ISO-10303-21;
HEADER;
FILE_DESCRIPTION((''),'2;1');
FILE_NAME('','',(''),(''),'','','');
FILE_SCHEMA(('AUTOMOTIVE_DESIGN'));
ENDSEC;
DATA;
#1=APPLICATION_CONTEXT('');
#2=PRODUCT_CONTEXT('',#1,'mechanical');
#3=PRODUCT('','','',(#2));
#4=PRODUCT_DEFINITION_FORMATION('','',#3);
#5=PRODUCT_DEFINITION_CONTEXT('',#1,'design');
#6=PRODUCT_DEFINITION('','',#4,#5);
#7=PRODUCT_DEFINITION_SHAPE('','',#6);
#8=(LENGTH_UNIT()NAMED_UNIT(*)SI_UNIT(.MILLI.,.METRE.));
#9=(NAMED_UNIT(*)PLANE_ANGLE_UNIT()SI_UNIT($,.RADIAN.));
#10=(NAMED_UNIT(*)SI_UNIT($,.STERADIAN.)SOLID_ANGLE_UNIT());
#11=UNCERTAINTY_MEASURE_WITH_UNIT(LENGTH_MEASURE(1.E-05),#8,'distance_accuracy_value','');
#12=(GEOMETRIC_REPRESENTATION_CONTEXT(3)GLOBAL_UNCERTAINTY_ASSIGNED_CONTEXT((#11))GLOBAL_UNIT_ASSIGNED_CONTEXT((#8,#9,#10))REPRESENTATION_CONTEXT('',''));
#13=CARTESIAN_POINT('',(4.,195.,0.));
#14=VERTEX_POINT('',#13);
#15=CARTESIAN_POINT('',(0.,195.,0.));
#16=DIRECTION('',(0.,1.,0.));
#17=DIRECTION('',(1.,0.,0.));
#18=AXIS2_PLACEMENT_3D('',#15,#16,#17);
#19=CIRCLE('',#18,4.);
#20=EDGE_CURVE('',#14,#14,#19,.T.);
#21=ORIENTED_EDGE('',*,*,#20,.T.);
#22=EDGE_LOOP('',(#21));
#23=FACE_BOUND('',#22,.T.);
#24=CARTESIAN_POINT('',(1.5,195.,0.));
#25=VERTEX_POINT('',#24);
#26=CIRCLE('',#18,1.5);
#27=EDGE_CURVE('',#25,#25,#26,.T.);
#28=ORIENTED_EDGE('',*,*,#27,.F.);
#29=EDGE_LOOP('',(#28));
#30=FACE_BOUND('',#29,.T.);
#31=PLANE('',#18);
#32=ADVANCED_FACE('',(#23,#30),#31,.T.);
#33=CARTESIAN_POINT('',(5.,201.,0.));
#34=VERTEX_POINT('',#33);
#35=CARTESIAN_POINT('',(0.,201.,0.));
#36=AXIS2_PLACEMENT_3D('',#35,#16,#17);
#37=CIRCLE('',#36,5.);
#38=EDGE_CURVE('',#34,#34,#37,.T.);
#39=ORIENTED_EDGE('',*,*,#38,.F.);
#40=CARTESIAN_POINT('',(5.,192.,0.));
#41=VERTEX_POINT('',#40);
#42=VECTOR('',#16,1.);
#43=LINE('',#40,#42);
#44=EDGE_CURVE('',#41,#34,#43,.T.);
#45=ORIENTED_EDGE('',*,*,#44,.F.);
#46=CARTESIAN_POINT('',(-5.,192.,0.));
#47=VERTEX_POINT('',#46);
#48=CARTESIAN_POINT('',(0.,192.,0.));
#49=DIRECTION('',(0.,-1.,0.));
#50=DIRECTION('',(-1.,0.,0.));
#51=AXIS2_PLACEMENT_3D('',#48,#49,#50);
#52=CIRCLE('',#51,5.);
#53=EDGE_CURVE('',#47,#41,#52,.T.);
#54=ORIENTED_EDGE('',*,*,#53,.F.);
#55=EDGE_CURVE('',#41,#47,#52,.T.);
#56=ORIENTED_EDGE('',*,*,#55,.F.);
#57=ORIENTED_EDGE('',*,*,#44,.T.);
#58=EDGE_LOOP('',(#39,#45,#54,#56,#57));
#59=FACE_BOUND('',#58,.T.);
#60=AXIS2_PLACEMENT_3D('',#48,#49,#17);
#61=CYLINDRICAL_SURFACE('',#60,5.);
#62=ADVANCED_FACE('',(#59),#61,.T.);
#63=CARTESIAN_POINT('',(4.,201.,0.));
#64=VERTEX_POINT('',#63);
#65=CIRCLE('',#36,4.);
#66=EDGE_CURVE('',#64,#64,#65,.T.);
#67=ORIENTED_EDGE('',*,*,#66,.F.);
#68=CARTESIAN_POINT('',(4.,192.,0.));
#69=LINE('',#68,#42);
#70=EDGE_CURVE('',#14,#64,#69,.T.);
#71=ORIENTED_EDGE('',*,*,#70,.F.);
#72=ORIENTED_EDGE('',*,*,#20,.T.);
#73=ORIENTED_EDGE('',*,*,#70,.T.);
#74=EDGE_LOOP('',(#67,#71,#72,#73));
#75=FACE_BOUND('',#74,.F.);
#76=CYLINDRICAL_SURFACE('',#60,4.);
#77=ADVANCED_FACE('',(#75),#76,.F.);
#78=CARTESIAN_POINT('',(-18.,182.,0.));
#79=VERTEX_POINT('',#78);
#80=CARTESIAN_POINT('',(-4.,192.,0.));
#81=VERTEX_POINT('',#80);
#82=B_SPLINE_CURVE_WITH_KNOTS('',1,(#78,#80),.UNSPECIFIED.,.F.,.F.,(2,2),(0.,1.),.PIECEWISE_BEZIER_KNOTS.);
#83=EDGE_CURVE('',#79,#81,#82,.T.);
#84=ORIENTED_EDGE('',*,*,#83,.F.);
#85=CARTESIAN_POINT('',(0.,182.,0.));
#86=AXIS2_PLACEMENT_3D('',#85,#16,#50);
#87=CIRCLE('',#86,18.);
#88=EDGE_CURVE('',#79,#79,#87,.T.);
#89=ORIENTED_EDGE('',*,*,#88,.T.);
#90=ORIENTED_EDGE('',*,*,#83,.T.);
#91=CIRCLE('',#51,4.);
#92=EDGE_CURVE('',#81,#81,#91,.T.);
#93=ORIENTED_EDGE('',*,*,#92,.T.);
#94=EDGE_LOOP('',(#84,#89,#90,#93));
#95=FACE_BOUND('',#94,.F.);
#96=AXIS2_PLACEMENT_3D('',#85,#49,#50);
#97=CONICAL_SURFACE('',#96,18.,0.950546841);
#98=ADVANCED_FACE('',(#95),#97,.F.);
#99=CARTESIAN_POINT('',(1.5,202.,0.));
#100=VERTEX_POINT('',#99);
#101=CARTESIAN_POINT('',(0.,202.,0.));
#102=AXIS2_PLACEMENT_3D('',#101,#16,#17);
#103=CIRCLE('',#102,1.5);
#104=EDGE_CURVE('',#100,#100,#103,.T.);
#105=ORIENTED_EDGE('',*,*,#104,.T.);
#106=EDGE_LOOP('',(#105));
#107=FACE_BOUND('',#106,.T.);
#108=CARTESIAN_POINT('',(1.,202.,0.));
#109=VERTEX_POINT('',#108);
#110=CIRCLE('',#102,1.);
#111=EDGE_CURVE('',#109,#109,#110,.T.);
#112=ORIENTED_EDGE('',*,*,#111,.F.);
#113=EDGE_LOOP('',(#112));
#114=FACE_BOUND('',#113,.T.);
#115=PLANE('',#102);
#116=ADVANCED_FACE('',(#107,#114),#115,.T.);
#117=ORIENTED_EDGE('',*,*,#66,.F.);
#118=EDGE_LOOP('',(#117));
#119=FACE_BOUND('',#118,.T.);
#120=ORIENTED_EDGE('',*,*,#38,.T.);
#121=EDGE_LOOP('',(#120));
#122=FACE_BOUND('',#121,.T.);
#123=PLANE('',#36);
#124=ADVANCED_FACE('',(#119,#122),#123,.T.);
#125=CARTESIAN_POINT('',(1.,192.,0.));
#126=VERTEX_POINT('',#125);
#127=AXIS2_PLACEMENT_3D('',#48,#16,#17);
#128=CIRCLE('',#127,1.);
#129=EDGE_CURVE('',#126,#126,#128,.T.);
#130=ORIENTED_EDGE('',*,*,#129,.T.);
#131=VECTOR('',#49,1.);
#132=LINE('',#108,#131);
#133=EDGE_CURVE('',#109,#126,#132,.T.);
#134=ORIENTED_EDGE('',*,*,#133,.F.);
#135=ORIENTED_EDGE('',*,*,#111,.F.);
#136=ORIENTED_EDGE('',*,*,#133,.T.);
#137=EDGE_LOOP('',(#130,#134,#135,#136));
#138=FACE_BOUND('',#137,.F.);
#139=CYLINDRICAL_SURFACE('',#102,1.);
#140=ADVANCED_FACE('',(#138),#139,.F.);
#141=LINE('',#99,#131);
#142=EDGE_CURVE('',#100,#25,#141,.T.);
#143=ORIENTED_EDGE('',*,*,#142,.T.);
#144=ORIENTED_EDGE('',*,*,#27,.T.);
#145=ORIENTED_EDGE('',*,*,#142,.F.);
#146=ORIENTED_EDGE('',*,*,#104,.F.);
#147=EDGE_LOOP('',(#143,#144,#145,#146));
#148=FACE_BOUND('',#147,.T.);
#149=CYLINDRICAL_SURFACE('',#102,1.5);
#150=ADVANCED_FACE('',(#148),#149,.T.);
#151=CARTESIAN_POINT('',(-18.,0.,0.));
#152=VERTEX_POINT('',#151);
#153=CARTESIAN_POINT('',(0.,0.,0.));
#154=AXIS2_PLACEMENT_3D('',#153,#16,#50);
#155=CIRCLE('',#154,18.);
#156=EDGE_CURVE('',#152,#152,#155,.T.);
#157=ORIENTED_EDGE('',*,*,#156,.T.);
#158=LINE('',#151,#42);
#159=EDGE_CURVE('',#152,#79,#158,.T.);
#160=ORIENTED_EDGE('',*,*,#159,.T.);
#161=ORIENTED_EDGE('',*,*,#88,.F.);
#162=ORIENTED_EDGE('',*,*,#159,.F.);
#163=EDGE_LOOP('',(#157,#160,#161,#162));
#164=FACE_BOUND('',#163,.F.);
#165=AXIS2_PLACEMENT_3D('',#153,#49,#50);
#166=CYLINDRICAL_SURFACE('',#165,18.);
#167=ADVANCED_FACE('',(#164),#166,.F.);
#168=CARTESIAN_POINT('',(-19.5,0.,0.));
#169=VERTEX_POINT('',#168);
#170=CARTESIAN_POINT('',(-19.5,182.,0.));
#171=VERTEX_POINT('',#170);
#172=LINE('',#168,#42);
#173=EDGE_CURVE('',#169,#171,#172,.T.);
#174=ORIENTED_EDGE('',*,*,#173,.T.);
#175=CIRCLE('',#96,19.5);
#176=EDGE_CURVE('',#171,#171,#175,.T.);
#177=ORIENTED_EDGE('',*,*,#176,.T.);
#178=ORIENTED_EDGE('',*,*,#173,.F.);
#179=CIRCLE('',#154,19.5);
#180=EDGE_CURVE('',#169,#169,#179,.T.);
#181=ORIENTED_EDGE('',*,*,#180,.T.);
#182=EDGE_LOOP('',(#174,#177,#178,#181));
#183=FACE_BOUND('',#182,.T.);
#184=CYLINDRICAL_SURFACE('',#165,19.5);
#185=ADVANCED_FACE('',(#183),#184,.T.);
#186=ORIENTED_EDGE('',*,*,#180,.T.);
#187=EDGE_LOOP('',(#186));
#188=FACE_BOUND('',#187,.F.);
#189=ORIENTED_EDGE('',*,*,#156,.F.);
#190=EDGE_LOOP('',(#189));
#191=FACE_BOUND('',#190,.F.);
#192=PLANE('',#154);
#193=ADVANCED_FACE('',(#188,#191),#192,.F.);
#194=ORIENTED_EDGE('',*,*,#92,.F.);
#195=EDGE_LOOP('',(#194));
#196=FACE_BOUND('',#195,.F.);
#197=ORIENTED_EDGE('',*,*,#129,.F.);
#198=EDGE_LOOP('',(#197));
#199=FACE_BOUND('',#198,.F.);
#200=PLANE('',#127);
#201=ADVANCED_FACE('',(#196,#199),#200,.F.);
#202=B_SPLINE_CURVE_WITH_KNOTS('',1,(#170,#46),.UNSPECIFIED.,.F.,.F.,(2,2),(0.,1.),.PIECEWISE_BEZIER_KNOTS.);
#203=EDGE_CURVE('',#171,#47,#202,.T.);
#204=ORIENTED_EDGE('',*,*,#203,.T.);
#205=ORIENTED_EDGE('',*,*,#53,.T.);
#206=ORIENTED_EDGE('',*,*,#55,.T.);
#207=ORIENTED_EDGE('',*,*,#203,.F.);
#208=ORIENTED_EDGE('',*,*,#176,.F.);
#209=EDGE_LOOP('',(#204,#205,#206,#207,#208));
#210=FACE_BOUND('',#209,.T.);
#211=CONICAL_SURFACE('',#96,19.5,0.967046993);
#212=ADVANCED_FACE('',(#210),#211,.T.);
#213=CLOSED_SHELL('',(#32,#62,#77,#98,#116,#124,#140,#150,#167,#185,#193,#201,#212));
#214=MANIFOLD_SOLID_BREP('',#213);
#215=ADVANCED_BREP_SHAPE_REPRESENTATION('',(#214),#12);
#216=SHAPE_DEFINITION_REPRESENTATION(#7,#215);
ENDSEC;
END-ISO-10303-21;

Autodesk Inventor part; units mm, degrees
ref_plane "YZ Plane" through (0, 0, 0) normal (1, 0, 0) x (0, 1, 0)
ref_plane "XZ Plane" through (0, 0, 0) normal (0, 1, 0) x (-1, 0, 0)
sketch "Sketch1" plane through (0, 0, 0) normal (0, 1, 0) x (-1, 0, 0)
  circle A0 centre (0, 0) radius 19.5
  circle A1 centre (0, 0) radius 18
  dimension "d0" = 39
  dimension "d1" = 36
extrude "Extrusion1" add sketch "Sketch1" along normal blind 182
ref_plane "Work Plane1" through (0, 192, 0) normal (0, 1, 0) x (1, 0, 0)
sketch "Sketch2" plane through (0, 192, 0) normal (0, 1, 0) x (1, 0, 0)
  circle A0 centre (0, 0) radius 5
  dimension "d5" = 10
loft "Loft1" add profiles "Sketch2" section 1 edges at (19.5, 182, 0)
sketch "Sketch3" plane through (0, 192, 0) normal (0, 1, 0) x (1, 0, 0)
  circle A0 centre (0, 0) radius 4
  dimension "d11" = 8
loft "Loft2" cut profiles "Sketch3" section 1 edges at (18, 182, 0)
sketch "Sketch4" plane through (0, 192, 0) normal (0, 1, 0) x (1, 0, 0)
  circle A0 centre (0, 0) radius 5
  circle A1 centre (0, 0) radius 4
  circle A2 centre (0, 0) radius 5 projected
  dimension "d16" = 10
  dimension "d17" = 8
extrude "Extrusion2" add sketch "Sketch4" along normal blind 9
sketch "Sketch5" plane through (0, 192, 0) normal (0, 1, 0) x (1, 0, 0)
  circle A0 centre (0, 0) radius 4
  circle A1 centre (0, 0) radius 4 projected
ref_plane "Work Plane2" through (0, 202, 0) normal (0, 1, 0) x (1, 0, 0)
sketch "Sketch6" plane through (0, 202, 0) normal (0, 1, 0) x (1, 0, 0)
  circle A0 centre (0, 0) radius 1.5
  line L0 (1.5, 0) -> (-1.5, 0) construction
  dimension "d21" = 3
extrude "Extrusion3" add sketch "Sketch5" along normal blind 3
extrude "Extrusion4" add sketch "Sketch6" against normal up to surface (7 mm away)
sketch "Sketch8" plane through (0, 202, 0) normal (0, 1, 0) x (1, 0, 0)
  circle A0 centre (0, 0) radius 1.5 projected
  circle A1 centre (0, 0) radius 1
  dimension "d26" = 2
extrude "Extrusion5" cut sketch "Sketch8" against normal through all contours A1
thread "Thread1" size "M39x2" class "6g" standard "ANSI Metric M Profile" length 16
properties part number "xilanh" material "PMMA Plastic"
